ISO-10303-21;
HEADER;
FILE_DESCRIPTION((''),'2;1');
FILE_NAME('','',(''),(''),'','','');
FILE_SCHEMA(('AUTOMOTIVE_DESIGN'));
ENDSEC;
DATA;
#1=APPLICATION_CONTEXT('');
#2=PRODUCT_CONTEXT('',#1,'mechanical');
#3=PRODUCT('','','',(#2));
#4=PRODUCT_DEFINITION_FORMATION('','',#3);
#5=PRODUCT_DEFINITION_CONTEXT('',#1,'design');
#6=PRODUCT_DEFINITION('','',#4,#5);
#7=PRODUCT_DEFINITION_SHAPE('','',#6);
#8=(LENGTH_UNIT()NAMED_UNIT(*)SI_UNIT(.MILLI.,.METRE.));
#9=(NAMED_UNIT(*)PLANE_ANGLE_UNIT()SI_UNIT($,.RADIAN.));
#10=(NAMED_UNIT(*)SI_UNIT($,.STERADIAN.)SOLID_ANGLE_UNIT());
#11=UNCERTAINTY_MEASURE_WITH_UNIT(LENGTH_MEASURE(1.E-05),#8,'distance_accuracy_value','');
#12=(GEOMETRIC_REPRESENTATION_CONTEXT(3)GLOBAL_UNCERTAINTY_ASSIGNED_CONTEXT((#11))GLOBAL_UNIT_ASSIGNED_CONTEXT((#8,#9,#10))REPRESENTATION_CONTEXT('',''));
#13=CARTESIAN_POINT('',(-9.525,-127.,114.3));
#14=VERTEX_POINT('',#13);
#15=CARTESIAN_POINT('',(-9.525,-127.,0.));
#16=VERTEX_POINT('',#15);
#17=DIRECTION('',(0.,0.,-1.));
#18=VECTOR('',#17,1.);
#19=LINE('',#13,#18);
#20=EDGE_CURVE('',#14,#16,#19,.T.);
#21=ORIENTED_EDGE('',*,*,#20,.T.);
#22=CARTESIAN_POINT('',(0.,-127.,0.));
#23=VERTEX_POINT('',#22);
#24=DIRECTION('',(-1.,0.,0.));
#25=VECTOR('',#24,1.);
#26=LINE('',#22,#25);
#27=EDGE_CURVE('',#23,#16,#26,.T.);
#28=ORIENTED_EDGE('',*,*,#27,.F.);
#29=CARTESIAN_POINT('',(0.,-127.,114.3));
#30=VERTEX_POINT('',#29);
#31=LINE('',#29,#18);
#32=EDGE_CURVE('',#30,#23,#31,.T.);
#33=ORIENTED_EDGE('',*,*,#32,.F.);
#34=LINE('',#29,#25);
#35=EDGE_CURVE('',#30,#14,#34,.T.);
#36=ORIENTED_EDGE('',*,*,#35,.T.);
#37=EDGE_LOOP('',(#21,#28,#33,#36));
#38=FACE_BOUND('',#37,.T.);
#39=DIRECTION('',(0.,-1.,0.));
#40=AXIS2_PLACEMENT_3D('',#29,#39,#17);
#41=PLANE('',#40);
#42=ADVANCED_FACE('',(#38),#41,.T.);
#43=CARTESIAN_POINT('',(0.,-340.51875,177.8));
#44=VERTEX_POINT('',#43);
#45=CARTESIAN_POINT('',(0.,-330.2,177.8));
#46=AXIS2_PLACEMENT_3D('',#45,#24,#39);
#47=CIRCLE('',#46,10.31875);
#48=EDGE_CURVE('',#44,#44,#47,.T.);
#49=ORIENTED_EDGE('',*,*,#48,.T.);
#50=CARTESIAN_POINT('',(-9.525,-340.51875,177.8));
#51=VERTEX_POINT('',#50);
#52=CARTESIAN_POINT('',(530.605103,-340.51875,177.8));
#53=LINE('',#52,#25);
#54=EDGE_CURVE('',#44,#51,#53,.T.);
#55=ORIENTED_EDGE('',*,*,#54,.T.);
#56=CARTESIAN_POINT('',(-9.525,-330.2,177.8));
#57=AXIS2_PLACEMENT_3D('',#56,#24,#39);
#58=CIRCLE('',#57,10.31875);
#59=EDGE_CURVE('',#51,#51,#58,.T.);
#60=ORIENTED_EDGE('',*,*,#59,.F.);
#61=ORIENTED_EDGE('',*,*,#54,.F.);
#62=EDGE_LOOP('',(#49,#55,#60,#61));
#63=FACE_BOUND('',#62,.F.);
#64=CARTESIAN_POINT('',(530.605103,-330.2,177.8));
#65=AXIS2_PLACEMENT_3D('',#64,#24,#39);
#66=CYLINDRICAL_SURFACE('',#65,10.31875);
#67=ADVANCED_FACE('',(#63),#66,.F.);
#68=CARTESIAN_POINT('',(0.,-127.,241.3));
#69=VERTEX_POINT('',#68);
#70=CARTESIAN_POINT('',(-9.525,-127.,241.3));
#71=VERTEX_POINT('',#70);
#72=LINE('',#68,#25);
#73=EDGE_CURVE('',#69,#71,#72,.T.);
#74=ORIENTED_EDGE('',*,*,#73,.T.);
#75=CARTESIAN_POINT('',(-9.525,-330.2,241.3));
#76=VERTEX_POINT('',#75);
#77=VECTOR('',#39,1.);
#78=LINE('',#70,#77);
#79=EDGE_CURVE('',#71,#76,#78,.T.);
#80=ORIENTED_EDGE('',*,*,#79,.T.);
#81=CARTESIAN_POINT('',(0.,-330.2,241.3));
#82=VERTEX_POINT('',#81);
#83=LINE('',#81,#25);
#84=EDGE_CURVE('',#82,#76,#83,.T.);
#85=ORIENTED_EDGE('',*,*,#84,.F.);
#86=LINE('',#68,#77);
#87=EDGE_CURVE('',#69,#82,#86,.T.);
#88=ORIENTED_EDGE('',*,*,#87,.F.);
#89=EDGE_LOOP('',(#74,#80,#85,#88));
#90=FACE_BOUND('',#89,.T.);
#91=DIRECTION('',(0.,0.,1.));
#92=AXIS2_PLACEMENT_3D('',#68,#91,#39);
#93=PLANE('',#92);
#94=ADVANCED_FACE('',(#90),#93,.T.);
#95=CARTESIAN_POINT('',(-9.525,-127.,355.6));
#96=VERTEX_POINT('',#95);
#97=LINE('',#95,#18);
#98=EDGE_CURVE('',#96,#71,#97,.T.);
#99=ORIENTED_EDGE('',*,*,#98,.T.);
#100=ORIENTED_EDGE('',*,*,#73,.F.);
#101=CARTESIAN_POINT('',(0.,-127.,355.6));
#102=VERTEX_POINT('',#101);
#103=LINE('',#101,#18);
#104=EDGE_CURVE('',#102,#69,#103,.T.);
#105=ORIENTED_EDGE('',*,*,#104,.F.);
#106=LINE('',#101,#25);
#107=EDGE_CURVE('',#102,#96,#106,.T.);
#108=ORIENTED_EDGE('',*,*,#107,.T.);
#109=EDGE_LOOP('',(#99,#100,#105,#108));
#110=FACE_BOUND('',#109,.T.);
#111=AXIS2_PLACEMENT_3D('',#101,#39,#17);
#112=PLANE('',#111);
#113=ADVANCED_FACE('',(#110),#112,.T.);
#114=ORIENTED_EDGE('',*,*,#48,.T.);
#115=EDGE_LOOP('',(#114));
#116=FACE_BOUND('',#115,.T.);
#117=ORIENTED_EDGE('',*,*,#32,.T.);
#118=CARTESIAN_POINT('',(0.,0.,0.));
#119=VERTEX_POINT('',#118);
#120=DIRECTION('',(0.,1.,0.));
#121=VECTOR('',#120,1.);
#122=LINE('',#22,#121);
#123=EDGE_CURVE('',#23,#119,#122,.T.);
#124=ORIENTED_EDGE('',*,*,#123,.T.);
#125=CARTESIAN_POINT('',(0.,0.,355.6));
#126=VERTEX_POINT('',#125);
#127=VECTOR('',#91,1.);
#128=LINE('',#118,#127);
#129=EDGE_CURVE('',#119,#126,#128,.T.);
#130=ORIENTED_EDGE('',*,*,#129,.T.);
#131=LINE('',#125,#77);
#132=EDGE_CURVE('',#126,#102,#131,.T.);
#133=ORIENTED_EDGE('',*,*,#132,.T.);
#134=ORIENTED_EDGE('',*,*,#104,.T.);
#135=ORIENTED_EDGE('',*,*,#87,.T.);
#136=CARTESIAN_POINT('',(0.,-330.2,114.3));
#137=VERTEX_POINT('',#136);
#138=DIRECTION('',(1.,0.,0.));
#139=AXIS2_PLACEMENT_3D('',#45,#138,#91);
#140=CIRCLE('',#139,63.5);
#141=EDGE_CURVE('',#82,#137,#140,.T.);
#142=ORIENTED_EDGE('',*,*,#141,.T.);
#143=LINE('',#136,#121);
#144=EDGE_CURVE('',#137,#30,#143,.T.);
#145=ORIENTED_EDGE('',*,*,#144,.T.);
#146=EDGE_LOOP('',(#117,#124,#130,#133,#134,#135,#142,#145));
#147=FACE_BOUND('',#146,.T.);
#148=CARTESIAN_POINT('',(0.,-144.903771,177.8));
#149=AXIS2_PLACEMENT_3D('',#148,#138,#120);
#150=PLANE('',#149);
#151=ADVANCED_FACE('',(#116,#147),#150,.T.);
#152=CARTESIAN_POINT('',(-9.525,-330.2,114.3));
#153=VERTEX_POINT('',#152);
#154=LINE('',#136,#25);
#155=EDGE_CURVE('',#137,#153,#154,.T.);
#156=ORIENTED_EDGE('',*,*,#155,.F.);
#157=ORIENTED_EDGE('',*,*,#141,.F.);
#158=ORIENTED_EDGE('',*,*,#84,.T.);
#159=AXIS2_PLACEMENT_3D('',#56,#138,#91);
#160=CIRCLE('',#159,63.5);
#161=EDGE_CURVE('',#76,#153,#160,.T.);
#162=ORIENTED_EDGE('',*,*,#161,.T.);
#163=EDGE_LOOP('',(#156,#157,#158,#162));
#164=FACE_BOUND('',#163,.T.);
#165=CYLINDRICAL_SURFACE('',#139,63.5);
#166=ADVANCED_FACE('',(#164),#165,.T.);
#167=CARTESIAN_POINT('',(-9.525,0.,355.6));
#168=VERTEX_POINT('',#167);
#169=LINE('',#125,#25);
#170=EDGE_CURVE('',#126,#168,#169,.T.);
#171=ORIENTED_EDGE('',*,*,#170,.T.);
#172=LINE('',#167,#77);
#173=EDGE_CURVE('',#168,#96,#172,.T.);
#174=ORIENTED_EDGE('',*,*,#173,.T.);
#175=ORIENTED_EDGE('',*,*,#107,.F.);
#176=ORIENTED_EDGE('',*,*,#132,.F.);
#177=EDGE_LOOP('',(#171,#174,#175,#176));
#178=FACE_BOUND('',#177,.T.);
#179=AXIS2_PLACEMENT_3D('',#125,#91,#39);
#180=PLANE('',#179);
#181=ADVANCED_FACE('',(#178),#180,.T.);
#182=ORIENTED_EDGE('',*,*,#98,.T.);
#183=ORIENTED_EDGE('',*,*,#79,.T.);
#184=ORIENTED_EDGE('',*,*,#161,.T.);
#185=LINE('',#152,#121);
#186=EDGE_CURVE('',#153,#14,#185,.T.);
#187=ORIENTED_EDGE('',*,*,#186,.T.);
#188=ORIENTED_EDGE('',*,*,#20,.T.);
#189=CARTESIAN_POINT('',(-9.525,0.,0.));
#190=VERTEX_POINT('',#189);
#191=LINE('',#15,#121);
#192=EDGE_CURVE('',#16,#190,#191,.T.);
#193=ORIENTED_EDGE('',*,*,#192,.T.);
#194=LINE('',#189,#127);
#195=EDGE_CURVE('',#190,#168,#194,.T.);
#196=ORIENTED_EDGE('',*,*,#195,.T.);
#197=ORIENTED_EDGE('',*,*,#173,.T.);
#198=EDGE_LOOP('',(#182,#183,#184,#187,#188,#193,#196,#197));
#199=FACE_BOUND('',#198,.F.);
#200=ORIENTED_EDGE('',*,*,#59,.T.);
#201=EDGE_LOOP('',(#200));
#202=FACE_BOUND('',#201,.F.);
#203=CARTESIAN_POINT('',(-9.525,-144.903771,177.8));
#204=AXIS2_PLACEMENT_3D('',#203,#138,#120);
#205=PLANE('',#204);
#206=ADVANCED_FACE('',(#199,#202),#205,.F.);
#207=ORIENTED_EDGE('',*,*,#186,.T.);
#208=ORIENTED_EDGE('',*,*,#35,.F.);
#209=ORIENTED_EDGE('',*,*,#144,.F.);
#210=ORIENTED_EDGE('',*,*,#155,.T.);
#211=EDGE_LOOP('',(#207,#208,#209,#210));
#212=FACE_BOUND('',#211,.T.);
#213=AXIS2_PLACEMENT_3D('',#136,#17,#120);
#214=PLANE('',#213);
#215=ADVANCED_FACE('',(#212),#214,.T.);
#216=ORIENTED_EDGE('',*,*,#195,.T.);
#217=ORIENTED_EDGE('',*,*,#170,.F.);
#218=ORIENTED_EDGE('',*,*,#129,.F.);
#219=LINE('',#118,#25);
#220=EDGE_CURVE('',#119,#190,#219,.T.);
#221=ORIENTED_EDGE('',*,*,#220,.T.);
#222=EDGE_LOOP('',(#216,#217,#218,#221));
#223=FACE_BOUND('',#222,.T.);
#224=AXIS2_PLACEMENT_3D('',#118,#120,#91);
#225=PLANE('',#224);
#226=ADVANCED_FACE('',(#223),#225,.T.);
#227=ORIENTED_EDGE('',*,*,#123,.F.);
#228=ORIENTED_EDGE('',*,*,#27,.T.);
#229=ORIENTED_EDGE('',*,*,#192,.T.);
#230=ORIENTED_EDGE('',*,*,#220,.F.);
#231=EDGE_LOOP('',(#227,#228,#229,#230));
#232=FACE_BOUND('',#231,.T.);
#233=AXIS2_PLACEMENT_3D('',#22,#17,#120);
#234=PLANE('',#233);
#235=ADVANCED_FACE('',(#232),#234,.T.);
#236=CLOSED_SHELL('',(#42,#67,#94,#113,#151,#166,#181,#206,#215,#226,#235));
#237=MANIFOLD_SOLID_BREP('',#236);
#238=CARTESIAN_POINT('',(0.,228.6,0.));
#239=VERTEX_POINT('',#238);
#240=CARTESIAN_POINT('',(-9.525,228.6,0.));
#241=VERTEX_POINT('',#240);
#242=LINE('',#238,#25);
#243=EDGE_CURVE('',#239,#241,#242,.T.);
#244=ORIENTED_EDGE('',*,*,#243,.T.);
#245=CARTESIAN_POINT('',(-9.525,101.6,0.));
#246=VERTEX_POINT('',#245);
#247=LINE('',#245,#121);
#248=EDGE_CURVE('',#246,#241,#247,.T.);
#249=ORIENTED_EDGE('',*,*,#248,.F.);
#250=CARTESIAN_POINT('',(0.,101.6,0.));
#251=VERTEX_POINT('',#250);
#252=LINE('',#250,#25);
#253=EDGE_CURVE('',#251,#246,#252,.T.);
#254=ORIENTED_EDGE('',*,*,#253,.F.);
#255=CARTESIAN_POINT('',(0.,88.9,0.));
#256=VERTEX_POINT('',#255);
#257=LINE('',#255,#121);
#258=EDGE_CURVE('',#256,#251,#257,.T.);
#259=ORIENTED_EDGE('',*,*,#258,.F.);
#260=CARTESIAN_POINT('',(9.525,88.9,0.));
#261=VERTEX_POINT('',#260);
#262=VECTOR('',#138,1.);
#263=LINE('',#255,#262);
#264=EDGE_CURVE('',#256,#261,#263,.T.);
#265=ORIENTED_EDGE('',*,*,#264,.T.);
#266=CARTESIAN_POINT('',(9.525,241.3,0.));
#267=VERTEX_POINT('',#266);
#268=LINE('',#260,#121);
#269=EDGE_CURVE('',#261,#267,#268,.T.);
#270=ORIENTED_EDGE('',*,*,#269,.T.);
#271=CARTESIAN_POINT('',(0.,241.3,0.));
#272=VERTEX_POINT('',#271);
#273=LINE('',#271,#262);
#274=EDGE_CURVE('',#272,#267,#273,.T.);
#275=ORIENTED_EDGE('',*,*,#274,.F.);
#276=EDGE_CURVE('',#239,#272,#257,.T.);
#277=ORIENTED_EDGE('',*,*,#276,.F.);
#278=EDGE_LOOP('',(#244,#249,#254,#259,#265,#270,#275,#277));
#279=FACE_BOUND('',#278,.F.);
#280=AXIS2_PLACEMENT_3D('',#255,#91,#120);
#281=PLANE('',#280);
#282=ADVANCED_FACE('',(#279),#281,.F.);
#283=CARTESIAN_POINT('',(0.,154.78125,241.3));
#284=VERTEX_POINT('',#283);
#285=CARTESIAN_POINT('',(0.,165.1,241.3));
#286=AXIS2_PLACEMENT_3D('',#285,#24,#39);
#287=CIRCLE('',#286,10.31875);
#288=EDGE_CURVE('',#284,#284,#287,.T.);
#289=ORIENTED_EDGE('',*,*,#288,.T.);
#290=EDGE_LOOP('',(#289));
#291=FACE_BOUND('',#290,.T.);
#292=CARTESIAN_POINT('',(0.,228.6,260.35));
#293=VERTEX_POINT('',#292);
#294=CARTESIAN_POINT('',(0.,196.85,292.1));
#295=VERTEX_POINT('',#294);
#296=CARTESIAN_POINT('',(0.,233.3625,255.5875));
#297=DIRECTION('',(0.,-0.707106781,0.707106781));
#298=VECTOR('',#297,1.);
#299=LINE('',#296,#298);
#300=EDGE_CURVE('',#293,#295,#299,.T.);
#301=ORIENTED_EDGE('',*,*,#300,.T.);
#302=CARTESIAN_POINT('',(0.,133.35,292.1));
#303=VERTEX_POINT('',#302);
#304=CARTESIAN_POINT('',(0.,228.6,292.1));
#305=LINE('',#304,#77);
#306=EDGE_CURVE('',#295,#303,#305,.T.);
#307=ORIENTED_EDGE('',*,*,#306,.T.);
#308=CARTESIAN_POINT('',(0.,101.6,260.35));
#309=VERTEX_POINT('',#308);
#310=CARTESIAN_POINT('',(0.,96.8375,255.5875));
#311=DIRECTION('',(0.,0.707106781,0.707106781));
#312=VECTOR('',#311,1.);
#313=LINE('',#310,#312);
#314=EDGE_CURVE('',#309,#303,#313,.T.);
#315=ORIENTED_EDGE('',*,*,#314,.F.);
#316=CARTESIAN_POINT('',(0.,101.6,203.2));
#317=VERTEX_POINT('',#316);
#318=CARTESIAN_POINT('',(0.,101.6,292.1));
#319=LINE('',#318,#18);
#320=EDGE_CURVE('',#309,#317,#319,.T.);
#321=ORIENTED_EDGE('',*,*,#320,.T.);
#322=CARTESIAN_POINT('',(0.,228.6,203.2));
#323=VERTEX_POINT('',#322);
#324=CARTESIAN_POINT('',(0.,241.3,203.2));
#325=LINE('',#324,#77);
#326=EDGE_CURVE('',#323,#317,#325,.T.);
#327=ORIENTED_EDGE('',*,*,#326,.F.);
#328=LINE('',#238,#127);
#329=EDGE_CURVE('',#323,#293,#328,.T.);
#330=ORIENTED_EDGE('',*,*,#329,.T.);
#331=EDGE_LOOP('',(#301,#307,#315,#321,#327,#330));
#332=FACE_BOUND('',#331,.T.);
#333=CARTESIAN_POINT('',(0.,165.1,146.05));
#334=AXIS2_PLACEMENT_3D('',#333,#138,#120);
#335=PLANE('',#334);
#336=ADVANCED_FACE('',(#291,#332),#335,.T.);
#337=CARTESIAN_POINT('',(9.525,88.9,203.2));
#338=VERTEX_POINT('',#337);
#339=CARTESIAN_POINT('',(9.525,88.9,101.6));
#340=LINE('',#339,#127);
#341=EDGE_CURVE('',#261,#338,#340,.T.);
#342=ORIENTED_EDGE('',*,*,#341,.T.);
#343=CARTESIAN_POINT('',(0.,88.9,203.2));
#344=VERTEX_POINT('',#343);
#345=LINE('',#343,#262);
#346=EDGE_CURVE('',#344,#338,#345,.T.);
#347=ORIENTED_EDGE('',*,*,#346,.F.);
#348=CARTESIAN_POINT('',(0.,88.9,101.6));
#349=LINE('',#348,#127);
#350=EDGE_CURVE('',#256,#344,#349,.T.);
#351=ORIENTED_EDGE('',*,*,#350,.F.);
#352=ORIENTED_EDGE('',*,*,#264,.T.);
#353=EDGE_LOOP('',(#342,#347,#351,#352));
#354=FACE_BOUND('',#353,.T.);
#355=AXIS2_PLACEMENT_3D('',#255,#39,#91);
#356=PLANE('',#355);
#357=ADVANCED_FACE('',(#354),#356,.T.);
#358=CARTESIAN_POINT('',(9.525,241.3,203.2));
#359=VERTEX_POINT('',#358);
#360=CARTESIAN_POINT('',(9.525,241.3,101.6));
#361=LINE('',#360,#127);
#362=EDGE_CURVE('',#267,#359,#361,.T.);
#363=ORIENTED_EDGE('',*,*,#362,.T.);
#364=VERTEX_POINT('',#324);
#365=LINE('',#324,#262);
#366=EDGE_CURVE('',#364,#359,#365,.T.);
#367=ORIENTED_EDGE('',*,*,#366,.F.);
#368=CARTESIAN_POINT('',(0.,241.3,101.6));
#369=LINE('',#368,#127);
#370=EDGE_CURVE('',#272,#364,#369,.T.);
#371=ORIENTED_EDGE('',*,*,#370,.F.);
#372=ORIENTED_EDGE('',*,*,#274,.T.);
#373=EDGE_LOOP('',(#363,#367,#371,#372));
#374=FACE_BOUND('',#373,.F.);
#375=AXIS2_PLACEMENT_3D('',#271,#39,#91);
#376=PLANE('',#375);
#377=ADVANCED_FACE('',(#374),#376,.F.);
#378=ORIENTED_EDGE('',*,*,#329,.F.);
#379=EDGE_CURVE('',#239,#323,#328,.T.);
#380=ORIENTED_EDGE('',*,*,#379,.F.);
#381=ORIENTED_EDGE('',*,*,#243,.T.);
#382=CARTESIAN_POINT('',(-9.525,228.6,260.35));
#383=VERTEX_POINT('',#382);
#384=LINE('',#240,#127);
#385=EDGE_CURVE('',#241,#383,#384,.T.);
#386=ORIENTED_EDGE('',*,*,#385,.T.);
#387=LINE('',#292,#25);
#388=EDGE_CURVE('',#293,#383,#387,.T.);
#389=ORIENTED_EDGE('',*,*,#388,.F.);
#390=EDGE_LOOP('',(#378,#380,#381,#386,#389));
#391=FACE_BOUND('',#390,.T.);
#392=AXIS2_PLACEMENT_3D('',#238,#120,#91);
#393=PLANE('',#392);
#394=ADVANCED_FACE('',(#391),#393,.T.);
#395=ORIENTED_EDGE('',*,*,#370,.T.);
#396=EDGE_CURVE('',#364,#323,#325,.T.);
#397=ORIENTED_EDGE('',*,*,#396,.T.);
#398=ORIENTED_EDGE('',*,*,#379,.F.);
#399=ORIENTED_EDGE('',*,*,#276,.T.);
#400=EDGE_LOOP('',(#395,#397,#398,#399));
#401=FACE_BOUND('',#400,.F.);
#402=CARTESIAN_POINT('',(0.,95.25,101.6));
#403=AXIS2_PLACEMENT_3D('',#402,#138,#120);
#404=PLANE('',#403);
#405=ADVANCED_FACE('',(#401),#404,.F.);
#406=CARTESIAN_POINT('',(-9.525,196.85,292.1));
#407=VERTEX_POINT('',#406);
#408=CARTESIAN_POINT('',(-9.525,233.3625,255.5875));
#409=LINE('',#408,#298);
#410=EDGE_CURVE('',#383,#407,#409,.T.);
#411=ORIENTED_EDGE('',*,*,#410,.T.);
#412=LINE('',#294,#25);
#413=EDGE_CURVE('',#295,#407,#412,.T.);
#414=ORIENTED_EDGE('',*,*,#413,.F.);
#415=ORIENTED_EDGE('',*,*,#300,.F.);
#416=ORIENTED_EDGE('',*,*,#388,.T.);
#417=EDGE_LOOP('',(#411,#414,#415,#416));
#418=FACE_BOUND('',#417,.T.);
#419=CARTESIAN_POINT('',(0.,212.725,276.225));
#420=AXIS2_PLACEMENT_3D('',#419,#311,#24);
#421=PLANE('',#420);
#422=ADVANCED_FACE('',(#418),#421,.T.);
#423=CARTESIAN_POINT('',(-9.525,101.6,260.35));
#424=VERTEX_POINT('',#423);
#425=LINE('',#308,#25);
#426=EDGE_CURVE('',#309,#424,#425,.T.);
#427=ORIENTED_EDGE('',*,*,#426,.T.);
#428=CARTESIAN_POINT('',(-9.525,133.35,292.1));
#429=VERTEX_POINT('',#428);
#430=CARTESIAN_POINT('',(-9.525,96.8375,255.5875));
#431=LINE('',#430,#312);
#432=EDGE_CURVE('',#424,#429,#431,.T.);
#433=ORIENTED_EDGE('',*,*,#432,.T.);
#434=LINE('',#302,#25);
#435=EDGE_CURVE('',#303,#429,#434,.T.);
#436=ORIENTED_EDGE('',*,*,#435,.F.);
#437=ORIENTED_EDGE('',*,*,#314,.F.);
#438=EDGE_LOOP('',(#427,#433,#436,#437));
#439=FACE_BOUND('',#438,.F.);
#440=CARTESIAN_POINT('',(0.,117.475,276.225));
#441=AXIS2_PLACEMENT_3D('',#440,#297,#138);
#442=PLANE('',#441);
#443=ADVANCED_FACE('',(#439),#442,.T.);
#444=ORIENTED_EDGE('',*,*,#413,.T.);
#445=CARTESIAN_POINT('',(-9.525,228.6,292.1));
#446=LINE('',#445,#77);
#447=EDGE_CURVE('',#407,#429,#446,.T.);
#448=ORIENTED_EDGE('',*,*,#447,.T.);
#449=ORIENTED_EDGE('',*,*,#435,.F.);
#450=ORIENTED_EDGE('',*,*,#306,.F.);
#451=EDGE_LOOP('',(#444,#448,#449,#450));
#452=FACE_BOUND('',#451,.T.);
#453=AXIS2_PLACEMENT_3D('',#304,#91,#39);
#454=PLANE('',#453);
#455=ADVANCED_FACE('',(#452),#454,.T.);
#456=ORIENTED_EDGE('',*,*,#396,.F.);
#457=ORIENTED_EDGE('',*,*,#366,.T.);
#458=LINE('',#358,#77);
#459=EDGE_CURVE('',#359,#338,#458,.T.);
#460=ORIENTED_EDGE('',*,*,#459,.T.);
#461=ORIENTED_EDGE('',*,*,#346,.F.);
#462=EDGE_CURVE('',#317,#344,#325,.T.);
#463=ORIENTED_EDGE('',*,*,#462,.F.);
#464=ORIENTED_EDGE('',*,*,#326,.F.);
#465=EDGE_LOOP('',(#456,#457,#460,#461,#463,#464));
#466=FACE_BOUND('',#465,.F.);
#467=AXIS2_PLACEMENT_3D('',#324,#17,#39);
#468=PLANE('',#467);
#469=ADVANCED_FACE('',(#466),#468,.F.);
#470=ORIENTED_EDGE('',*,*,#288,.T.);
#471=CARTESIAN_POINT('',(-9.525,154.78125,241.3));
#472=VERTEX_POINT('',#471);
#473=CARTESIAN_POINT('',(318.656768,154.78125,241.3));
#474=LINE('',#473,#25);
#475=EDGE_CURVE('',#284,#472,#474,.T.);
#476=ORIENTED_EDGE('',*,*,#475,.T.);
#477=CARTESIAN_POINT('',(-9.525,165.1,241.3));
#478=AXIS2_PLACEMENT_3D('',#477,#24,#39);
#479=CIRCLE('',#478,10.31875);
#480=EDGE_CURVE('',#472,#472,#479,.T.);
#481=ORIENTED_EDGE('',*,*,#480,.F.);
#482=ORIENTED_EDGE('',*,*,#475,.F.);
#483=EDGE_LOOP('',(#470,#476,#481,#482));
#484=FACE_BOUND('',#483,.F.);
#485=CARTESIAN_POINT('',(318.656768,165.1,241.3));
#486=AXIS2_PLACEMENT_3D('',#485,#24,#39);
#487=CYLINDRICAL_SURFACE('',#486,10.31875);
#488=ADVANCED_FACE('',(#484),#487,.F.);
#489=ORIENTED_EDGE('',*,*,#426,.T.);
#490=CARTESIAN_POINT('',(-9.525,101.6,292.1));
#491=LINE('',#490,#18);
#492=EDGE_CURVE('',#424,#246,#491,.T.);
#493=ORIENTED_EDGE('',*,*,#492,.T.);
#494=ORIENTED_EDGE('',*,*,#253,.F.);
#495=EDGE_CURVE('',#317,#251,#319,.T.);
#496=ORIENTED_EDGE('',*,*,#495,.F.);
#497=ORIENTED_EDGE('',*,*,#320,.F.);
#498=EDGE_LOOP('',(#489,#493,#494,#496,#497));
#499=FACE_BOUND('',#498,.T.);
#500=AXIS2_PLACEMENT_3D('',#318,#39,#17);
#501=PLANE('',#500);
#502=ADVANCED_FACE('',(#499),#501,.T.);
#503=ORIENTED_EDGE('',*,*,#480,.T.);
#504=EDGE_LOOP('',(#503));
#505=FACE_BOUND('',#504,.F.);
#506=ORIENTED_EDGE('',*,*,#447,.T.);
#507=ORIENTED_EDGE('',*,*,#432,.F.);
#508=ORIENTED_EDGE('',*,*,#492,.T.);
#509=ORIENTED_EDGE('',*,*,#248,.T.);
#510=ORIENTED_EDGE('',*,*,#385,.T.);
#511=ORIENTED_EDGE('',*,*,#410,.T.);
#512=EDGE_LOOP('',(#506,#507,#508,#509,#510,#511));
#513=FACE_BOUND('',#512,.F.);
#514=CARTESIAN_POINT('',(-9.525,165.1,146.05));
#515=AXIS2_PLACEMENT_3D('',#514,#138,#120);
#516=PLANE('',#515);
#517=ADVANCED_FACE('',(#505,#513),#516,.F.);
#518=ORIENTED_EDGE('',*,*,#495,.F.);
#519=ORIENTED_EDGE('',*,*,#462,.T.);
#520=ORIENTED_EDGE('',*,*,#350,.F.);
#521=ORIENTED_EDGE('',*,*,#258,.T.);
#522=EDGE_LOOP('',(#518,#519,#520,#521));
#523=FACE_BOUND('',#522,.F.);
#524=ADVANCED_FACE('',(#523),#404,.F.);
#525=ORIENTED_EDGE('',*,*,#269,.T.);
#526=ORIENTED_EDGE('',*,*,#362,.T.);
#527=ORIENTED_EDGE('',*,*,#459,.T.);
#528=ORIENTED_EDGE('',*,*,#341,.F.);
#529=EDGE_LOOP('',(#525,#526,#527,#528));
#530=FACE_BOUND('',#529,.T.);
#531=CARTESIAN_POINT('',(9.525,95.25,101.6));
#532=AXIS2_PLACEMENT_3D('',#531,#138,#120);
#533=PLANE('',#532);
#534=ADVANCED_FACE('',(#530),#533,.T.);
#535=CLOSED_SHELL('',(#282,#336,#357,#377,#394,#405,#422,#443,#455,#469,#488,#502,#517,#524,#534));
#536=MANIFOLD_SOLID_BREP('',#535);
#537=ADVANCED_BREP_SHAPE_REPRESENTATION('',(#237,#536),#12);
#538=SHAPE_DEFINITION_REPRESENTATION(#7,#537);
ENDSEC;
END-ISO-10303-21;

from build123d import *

# Parameters (mm, degrees)
F1_DEPTH = 9.525
F2_SIZE  = 31.75
F3_D     = 20.6375
F4_W     = 12.7
F4_H     = 203.2
F4_W_2   = 63.5
F5_DEPTH = 9.525
F7_DEPTH = 9.525
F8_D     = 20.6375


with BuildPart() as f1:
    # F0 (on Right) → F1 (new body)
    with BuildSketch(Plane.YZ):
        Polygon((101.6, 292.1), (101.6, 0), (165.1, 0), (228.6, 0), (228.6, 292.1), align=None)
    extrude(amount=-F1_DEPTH)

    # F2
    f2_edges = [f1.edges().sort_by_distance(p)[0] for p in [
        (-4.7625, 101.6, 292.1),
        (-4.7625, 228.6, 292.1),
    ]]
    chamfer(f2_edges, length=F2_SIZE)

    # F3 (through all)
    with Locations(Plane.YZ):
        with Locations((165.1, 241.3)):
            Hole(F3_D / 2)

    # F4 (on face) → F5 (join)
    with BuildSketch(Plane.YZ):
        with Locations((95.25, 101.6)):
            Rectangle(F4_W, F4_H)
        with Locations((133.35, 101.6)):
            Rectangle(F4_W_2, F4_H)
        with Locations((196.85, 101.6)):
            Rectangle(F4_W_2, F4_H)
        with Locations((234.95, 101.6)):
            Rectangle(F4_W, F4_H)
    extrude(amount=F5_DEPTH)


with BuildPart() as f7:
    # F6 (on Right) → F7 (new body)
    with BuildSketch(Plane.YZ):
        with BuildLine():
            Line((-127, 0), (0, 0))
            Line((0, 0), (0, 355.6))
            Line((0, 355.6), (-127, 355.6))
            Line((-127, 355.6), (-127, 241.3))
            Line((-127, 241.3), (-330.2, 241.3))
            ThreePointArc((-330.2, 241.3), (-393.7, 177.8), (-330.2, 114.3))
            Line((-330.2, 114.3), (-127, 114.3))
            Line((-127, 114.3), (-127, 0))
        make_face()
    extrude(amount=-F7_DEPTH)

    # F8 (through all)
    with Locations(Plane.YZ):
        with Locations((-330.2, 177.8)):
            Hole(F8_D / 2)


solid = Compound([f1.part, f7.part])
